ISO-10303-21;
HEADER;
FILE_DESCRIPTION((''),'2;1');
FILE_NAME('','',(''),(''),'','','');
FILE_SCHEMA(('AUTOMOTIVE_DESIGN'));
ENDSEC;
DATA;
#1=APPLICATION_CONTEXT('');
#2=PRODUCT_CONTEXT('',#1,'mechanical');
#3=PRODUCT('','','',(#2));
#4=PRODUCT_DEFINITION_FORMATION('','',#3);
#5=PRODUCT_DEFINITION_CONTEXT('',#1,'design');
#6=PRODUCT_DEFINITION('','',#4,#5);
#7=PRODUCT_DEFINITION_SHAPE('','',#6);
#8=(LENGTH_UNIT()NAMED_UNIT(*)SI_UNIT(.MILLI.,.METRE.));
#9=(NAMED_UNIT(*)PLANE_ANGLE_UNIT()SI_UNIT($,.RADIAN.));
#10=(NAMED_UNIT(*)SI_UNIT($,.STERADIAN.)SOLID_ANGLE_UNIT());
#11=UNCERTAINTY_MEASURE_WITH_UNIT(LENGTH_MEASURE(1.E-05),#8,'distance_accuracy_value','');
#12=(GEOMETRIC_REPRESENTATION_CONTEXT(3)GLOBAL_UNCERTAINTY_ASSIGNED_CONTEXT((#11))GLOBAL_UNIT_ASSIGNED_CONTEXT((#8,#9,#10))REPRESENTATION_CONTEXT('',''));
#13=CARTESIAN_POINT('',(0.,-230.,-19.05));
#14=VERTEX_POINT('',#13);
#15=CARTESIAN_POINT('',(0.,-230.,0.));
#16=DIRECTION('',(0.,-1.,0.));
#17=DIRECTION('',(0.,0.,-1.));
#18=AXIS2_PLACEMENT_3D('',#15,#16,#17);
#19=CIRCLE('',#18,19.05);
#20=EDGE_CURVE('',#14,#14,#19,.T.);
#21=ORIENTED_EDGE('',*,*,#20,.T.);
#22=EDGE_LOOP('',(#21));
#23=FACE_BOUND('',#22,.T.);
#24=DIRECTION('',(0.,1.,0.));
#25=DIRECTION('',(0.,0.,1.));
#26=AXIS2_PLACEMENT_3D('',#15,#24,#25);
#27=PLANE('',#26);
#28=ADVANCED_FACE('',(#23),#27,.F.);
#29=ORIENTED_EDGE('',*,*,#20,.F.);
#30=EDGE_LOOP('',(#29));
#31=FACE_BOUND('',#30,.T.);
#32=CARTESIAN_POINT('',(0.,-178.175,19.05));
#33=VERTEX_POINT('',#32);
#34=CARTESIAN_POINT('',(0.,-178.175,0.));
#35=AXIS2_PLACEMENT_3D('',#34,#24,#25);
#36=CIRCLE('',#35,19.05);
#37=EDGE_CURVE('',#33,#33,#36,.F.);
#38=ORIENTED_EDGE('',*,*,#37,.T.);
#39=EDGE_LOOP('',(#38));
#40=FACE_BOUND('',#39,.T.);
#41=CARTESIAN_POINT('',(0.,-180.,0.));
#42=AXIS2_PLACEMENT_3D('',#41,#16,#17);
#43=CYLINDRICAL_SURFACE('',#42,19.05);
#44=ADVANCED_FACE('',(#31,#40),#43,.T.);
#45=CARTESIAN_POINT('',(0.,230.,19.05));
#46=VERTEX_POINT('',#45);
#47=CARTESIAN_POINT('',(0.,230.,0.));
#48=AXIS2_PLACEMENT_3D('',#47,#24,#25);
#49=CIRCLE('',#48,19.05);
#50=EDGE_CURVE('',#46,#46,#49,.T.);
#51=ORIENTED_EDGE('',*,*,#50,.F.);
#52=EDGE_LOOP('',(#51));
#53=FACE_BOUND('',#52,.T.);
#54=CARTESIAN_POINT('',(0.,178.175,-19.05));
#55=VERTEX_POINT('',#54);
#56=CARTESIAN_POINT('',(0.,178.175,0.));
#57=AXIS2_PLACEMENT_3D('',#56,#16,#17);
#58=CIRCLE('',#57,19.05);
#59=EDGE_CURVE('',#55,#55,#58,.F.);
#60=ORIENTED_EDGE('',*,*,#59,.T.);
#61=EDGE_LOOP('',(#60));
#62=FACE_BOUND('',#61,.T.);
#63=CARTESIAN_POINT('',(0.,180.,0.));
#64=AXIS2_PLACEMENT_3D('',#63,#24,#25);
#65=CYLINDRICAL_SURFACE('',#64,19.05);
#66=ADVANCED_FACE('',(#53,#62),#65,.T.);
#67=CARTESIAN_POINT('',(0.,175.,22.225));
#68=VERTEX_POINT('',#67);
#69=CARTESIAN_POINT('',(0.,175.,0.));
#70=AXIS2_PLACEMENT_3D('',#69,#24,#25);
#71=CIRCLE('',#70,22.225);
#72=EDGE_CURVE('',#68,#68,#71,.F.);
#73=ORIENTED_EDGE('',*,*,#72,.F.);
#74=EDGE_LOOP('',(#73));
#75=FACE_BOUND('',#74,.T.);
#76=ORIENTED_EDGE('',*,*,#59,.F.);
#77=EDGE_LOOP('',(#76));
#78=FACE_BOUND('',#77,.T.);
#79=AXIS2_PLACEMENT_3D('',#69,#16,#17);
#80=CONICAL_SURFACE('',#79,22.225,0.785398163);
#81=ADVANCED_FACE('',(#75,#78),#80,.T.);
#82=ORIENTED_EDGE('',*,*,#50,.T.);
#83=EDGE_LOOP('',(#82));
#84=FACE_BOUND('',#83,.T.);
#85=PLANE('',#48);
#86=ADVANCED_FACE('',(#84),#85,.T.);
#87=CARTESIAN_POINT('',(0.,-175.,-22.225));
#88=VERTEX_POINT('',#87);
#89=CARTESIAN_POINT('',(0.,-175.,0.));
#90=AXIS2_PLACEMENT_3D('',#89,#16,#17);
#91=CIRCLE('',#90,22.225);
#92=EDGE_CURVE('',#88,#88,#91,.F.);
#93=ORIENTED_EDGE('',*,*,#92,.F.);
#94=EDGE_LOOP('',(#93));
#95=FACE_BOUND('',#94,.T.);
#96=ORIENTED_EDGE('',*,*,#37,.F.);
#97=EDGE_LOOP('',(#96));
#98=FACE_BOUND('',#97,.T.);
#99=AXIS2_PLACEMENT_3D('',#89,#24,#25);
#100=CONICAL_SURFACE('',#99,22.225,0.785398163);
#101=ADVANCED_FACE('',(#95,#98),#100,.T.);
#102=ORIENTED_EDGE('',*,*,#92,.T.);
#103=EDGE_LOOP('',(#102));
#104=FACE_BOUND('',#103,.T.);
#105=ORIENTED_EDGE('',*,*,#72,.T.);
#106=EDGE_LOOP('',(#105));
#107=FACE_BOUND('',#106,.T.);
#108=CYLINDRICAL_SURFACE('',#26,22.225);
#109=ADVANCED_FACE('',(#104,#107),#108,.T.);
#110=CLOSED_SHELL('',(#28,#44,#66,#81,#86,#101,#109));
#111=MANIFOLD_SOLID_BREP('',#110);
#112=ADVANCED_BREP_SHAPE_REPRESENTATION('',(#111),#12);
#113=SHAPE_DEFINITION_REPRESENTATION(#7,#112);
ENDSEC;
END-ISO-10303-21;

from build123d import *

# Parameters (mm, degrees)
BOSS_EXTRUDE1_DEPTH      = 230
BOSS_EXTRUDE1_DEPTH_BACK = 230
SKETCH1_R                = 22.225
SKETCH2_R                = 25.4
SKETCH2_R_2              = 19.05
CUT_EXTRUDE1_DEPTH       = 50
CHAMFER1_SIZE            = 5
CUT_EXTRUDE2_START       = -50
SKETCH3_R                = 25.4
SKETCH3_R_2              = 19.05
CUT_EXTRUDE2_DEPTH       = 50
CHAMFER2_SIZE            = 5


with BuildPart() as part:
    # Sketch1 → Boss-Extrude1 (new, two sides: drawn at the far end of the back side and taken through both)
    with BuildSketch(Plane(origin=(0, 0, 0), x_dir=(1, 0, 0), z_dir=(0, 1, 0)).offset(-BOSS_EXTRUDE1_DEPTH_BACK)):
        with Locations(Location((0, 0, 0), (0, 0, 270))):
            Circle(SKETCH1_R)
    extrude(amount=BOSS_EXTRUDE1_DEPTH + BOSS_EXTRUDE1_DEPTH_BACK)

    # Sketch2 → Cut-Extrude1 (cut)
    with BuildSketch(Plane(origin=(0, 230, 0), x_dir=(1, 0, 0), z_dir=(0, 1, 0))):
        Circle(SKETCH2_R)
        with Locations(Location((0, 0, 0), (0, 0, 270))):
            Circle(SKETCH2_R_2, mode=Mode.SUBTRACT)
    extrude(amount=-CUT_EXTRUDE1_DEPTH, mode=Mode.SUBTRACT)

    # Chamfer1
    # the kernel refuses this chamfer: 5 mm, written as the material it takes off along each edge
    with BuildSketch(Plane(origin=(0, 180, 0), x_dir=(0, 0, 1), z_dir=(1, 0, 0))) as chamfer1_piece_1_section:
        Polygon((22.225, CHAMFER1_SIZE), (22.225 - CHAMFER1_SIZE, 0), (22.225, 0), align=None)
    chamfer1_piece_1 = revolve(axis=Axis((0, 180, 0), (0, -1, 0)), mode=Mode.PRIVATE)
    chamfer1_piece_1 = chamfer1_piece_1 - Plane(origin=(0, 176.598584916, 0), x_dir=(0, 0, 1), z_dir=(0, 1, 0)) * Cylinder(19.05, 89, mode=Mode.PRIVATE)
    add(chamfer1_piece_1, mode=Mode.SUBTRACT)

    # Sketch3 → Cut-Extrude2 (cut)
    with BuildSketch(Plane(origin=(0, -230, 0), x_dir=(-1, 0, 0), z_dir=(0, -1, 0)).offset(CUT_EXTRUDE2_START)):
        Circle(SKETCH3_R)
        with Locations(Location((0, 0, 0), (0, 0, 270))):
            Circle(SKETCH3_R_2, mode=Mode.SUBTRACT)
    extrude(amount=CUT_EXTRUDE2_DEPTH, mode=Mode.SUBTRACT)

    # Chamfer2
    # the kernel refuses this chamfer: 5 mm, written as the material it takes off along each edge
    with BuildSketch(Plane(origin=(0, -180, 0), x_dir=(0, 0, 1), z_dir=(-1, 0, 0))) as chamfer2_piece_1_section:
        Polygon((22.225, CHAMFER2_SIZE), (22.225 - CHAMFER2_SIZE, 0), (22.225, 0), align=None)
    chamfer2_piece_1 = revolve(axis=Axis((0, -180, 0), (0, 1, 0)), mode=Mode.PRIVATE)
    chamfer2_piece_1 = chamfer2_piece_1 - Plane(origin=(0, -176.598584916, 0), x_dir=(0, 0, 1), z_dir=(0, 1, 0)) * Cylinder(19.05, 89, mode=Mode.PRIVATE)
    add(chamfer2_piece_1, mode=Mode.SUBTRACT)


solid = part.part
